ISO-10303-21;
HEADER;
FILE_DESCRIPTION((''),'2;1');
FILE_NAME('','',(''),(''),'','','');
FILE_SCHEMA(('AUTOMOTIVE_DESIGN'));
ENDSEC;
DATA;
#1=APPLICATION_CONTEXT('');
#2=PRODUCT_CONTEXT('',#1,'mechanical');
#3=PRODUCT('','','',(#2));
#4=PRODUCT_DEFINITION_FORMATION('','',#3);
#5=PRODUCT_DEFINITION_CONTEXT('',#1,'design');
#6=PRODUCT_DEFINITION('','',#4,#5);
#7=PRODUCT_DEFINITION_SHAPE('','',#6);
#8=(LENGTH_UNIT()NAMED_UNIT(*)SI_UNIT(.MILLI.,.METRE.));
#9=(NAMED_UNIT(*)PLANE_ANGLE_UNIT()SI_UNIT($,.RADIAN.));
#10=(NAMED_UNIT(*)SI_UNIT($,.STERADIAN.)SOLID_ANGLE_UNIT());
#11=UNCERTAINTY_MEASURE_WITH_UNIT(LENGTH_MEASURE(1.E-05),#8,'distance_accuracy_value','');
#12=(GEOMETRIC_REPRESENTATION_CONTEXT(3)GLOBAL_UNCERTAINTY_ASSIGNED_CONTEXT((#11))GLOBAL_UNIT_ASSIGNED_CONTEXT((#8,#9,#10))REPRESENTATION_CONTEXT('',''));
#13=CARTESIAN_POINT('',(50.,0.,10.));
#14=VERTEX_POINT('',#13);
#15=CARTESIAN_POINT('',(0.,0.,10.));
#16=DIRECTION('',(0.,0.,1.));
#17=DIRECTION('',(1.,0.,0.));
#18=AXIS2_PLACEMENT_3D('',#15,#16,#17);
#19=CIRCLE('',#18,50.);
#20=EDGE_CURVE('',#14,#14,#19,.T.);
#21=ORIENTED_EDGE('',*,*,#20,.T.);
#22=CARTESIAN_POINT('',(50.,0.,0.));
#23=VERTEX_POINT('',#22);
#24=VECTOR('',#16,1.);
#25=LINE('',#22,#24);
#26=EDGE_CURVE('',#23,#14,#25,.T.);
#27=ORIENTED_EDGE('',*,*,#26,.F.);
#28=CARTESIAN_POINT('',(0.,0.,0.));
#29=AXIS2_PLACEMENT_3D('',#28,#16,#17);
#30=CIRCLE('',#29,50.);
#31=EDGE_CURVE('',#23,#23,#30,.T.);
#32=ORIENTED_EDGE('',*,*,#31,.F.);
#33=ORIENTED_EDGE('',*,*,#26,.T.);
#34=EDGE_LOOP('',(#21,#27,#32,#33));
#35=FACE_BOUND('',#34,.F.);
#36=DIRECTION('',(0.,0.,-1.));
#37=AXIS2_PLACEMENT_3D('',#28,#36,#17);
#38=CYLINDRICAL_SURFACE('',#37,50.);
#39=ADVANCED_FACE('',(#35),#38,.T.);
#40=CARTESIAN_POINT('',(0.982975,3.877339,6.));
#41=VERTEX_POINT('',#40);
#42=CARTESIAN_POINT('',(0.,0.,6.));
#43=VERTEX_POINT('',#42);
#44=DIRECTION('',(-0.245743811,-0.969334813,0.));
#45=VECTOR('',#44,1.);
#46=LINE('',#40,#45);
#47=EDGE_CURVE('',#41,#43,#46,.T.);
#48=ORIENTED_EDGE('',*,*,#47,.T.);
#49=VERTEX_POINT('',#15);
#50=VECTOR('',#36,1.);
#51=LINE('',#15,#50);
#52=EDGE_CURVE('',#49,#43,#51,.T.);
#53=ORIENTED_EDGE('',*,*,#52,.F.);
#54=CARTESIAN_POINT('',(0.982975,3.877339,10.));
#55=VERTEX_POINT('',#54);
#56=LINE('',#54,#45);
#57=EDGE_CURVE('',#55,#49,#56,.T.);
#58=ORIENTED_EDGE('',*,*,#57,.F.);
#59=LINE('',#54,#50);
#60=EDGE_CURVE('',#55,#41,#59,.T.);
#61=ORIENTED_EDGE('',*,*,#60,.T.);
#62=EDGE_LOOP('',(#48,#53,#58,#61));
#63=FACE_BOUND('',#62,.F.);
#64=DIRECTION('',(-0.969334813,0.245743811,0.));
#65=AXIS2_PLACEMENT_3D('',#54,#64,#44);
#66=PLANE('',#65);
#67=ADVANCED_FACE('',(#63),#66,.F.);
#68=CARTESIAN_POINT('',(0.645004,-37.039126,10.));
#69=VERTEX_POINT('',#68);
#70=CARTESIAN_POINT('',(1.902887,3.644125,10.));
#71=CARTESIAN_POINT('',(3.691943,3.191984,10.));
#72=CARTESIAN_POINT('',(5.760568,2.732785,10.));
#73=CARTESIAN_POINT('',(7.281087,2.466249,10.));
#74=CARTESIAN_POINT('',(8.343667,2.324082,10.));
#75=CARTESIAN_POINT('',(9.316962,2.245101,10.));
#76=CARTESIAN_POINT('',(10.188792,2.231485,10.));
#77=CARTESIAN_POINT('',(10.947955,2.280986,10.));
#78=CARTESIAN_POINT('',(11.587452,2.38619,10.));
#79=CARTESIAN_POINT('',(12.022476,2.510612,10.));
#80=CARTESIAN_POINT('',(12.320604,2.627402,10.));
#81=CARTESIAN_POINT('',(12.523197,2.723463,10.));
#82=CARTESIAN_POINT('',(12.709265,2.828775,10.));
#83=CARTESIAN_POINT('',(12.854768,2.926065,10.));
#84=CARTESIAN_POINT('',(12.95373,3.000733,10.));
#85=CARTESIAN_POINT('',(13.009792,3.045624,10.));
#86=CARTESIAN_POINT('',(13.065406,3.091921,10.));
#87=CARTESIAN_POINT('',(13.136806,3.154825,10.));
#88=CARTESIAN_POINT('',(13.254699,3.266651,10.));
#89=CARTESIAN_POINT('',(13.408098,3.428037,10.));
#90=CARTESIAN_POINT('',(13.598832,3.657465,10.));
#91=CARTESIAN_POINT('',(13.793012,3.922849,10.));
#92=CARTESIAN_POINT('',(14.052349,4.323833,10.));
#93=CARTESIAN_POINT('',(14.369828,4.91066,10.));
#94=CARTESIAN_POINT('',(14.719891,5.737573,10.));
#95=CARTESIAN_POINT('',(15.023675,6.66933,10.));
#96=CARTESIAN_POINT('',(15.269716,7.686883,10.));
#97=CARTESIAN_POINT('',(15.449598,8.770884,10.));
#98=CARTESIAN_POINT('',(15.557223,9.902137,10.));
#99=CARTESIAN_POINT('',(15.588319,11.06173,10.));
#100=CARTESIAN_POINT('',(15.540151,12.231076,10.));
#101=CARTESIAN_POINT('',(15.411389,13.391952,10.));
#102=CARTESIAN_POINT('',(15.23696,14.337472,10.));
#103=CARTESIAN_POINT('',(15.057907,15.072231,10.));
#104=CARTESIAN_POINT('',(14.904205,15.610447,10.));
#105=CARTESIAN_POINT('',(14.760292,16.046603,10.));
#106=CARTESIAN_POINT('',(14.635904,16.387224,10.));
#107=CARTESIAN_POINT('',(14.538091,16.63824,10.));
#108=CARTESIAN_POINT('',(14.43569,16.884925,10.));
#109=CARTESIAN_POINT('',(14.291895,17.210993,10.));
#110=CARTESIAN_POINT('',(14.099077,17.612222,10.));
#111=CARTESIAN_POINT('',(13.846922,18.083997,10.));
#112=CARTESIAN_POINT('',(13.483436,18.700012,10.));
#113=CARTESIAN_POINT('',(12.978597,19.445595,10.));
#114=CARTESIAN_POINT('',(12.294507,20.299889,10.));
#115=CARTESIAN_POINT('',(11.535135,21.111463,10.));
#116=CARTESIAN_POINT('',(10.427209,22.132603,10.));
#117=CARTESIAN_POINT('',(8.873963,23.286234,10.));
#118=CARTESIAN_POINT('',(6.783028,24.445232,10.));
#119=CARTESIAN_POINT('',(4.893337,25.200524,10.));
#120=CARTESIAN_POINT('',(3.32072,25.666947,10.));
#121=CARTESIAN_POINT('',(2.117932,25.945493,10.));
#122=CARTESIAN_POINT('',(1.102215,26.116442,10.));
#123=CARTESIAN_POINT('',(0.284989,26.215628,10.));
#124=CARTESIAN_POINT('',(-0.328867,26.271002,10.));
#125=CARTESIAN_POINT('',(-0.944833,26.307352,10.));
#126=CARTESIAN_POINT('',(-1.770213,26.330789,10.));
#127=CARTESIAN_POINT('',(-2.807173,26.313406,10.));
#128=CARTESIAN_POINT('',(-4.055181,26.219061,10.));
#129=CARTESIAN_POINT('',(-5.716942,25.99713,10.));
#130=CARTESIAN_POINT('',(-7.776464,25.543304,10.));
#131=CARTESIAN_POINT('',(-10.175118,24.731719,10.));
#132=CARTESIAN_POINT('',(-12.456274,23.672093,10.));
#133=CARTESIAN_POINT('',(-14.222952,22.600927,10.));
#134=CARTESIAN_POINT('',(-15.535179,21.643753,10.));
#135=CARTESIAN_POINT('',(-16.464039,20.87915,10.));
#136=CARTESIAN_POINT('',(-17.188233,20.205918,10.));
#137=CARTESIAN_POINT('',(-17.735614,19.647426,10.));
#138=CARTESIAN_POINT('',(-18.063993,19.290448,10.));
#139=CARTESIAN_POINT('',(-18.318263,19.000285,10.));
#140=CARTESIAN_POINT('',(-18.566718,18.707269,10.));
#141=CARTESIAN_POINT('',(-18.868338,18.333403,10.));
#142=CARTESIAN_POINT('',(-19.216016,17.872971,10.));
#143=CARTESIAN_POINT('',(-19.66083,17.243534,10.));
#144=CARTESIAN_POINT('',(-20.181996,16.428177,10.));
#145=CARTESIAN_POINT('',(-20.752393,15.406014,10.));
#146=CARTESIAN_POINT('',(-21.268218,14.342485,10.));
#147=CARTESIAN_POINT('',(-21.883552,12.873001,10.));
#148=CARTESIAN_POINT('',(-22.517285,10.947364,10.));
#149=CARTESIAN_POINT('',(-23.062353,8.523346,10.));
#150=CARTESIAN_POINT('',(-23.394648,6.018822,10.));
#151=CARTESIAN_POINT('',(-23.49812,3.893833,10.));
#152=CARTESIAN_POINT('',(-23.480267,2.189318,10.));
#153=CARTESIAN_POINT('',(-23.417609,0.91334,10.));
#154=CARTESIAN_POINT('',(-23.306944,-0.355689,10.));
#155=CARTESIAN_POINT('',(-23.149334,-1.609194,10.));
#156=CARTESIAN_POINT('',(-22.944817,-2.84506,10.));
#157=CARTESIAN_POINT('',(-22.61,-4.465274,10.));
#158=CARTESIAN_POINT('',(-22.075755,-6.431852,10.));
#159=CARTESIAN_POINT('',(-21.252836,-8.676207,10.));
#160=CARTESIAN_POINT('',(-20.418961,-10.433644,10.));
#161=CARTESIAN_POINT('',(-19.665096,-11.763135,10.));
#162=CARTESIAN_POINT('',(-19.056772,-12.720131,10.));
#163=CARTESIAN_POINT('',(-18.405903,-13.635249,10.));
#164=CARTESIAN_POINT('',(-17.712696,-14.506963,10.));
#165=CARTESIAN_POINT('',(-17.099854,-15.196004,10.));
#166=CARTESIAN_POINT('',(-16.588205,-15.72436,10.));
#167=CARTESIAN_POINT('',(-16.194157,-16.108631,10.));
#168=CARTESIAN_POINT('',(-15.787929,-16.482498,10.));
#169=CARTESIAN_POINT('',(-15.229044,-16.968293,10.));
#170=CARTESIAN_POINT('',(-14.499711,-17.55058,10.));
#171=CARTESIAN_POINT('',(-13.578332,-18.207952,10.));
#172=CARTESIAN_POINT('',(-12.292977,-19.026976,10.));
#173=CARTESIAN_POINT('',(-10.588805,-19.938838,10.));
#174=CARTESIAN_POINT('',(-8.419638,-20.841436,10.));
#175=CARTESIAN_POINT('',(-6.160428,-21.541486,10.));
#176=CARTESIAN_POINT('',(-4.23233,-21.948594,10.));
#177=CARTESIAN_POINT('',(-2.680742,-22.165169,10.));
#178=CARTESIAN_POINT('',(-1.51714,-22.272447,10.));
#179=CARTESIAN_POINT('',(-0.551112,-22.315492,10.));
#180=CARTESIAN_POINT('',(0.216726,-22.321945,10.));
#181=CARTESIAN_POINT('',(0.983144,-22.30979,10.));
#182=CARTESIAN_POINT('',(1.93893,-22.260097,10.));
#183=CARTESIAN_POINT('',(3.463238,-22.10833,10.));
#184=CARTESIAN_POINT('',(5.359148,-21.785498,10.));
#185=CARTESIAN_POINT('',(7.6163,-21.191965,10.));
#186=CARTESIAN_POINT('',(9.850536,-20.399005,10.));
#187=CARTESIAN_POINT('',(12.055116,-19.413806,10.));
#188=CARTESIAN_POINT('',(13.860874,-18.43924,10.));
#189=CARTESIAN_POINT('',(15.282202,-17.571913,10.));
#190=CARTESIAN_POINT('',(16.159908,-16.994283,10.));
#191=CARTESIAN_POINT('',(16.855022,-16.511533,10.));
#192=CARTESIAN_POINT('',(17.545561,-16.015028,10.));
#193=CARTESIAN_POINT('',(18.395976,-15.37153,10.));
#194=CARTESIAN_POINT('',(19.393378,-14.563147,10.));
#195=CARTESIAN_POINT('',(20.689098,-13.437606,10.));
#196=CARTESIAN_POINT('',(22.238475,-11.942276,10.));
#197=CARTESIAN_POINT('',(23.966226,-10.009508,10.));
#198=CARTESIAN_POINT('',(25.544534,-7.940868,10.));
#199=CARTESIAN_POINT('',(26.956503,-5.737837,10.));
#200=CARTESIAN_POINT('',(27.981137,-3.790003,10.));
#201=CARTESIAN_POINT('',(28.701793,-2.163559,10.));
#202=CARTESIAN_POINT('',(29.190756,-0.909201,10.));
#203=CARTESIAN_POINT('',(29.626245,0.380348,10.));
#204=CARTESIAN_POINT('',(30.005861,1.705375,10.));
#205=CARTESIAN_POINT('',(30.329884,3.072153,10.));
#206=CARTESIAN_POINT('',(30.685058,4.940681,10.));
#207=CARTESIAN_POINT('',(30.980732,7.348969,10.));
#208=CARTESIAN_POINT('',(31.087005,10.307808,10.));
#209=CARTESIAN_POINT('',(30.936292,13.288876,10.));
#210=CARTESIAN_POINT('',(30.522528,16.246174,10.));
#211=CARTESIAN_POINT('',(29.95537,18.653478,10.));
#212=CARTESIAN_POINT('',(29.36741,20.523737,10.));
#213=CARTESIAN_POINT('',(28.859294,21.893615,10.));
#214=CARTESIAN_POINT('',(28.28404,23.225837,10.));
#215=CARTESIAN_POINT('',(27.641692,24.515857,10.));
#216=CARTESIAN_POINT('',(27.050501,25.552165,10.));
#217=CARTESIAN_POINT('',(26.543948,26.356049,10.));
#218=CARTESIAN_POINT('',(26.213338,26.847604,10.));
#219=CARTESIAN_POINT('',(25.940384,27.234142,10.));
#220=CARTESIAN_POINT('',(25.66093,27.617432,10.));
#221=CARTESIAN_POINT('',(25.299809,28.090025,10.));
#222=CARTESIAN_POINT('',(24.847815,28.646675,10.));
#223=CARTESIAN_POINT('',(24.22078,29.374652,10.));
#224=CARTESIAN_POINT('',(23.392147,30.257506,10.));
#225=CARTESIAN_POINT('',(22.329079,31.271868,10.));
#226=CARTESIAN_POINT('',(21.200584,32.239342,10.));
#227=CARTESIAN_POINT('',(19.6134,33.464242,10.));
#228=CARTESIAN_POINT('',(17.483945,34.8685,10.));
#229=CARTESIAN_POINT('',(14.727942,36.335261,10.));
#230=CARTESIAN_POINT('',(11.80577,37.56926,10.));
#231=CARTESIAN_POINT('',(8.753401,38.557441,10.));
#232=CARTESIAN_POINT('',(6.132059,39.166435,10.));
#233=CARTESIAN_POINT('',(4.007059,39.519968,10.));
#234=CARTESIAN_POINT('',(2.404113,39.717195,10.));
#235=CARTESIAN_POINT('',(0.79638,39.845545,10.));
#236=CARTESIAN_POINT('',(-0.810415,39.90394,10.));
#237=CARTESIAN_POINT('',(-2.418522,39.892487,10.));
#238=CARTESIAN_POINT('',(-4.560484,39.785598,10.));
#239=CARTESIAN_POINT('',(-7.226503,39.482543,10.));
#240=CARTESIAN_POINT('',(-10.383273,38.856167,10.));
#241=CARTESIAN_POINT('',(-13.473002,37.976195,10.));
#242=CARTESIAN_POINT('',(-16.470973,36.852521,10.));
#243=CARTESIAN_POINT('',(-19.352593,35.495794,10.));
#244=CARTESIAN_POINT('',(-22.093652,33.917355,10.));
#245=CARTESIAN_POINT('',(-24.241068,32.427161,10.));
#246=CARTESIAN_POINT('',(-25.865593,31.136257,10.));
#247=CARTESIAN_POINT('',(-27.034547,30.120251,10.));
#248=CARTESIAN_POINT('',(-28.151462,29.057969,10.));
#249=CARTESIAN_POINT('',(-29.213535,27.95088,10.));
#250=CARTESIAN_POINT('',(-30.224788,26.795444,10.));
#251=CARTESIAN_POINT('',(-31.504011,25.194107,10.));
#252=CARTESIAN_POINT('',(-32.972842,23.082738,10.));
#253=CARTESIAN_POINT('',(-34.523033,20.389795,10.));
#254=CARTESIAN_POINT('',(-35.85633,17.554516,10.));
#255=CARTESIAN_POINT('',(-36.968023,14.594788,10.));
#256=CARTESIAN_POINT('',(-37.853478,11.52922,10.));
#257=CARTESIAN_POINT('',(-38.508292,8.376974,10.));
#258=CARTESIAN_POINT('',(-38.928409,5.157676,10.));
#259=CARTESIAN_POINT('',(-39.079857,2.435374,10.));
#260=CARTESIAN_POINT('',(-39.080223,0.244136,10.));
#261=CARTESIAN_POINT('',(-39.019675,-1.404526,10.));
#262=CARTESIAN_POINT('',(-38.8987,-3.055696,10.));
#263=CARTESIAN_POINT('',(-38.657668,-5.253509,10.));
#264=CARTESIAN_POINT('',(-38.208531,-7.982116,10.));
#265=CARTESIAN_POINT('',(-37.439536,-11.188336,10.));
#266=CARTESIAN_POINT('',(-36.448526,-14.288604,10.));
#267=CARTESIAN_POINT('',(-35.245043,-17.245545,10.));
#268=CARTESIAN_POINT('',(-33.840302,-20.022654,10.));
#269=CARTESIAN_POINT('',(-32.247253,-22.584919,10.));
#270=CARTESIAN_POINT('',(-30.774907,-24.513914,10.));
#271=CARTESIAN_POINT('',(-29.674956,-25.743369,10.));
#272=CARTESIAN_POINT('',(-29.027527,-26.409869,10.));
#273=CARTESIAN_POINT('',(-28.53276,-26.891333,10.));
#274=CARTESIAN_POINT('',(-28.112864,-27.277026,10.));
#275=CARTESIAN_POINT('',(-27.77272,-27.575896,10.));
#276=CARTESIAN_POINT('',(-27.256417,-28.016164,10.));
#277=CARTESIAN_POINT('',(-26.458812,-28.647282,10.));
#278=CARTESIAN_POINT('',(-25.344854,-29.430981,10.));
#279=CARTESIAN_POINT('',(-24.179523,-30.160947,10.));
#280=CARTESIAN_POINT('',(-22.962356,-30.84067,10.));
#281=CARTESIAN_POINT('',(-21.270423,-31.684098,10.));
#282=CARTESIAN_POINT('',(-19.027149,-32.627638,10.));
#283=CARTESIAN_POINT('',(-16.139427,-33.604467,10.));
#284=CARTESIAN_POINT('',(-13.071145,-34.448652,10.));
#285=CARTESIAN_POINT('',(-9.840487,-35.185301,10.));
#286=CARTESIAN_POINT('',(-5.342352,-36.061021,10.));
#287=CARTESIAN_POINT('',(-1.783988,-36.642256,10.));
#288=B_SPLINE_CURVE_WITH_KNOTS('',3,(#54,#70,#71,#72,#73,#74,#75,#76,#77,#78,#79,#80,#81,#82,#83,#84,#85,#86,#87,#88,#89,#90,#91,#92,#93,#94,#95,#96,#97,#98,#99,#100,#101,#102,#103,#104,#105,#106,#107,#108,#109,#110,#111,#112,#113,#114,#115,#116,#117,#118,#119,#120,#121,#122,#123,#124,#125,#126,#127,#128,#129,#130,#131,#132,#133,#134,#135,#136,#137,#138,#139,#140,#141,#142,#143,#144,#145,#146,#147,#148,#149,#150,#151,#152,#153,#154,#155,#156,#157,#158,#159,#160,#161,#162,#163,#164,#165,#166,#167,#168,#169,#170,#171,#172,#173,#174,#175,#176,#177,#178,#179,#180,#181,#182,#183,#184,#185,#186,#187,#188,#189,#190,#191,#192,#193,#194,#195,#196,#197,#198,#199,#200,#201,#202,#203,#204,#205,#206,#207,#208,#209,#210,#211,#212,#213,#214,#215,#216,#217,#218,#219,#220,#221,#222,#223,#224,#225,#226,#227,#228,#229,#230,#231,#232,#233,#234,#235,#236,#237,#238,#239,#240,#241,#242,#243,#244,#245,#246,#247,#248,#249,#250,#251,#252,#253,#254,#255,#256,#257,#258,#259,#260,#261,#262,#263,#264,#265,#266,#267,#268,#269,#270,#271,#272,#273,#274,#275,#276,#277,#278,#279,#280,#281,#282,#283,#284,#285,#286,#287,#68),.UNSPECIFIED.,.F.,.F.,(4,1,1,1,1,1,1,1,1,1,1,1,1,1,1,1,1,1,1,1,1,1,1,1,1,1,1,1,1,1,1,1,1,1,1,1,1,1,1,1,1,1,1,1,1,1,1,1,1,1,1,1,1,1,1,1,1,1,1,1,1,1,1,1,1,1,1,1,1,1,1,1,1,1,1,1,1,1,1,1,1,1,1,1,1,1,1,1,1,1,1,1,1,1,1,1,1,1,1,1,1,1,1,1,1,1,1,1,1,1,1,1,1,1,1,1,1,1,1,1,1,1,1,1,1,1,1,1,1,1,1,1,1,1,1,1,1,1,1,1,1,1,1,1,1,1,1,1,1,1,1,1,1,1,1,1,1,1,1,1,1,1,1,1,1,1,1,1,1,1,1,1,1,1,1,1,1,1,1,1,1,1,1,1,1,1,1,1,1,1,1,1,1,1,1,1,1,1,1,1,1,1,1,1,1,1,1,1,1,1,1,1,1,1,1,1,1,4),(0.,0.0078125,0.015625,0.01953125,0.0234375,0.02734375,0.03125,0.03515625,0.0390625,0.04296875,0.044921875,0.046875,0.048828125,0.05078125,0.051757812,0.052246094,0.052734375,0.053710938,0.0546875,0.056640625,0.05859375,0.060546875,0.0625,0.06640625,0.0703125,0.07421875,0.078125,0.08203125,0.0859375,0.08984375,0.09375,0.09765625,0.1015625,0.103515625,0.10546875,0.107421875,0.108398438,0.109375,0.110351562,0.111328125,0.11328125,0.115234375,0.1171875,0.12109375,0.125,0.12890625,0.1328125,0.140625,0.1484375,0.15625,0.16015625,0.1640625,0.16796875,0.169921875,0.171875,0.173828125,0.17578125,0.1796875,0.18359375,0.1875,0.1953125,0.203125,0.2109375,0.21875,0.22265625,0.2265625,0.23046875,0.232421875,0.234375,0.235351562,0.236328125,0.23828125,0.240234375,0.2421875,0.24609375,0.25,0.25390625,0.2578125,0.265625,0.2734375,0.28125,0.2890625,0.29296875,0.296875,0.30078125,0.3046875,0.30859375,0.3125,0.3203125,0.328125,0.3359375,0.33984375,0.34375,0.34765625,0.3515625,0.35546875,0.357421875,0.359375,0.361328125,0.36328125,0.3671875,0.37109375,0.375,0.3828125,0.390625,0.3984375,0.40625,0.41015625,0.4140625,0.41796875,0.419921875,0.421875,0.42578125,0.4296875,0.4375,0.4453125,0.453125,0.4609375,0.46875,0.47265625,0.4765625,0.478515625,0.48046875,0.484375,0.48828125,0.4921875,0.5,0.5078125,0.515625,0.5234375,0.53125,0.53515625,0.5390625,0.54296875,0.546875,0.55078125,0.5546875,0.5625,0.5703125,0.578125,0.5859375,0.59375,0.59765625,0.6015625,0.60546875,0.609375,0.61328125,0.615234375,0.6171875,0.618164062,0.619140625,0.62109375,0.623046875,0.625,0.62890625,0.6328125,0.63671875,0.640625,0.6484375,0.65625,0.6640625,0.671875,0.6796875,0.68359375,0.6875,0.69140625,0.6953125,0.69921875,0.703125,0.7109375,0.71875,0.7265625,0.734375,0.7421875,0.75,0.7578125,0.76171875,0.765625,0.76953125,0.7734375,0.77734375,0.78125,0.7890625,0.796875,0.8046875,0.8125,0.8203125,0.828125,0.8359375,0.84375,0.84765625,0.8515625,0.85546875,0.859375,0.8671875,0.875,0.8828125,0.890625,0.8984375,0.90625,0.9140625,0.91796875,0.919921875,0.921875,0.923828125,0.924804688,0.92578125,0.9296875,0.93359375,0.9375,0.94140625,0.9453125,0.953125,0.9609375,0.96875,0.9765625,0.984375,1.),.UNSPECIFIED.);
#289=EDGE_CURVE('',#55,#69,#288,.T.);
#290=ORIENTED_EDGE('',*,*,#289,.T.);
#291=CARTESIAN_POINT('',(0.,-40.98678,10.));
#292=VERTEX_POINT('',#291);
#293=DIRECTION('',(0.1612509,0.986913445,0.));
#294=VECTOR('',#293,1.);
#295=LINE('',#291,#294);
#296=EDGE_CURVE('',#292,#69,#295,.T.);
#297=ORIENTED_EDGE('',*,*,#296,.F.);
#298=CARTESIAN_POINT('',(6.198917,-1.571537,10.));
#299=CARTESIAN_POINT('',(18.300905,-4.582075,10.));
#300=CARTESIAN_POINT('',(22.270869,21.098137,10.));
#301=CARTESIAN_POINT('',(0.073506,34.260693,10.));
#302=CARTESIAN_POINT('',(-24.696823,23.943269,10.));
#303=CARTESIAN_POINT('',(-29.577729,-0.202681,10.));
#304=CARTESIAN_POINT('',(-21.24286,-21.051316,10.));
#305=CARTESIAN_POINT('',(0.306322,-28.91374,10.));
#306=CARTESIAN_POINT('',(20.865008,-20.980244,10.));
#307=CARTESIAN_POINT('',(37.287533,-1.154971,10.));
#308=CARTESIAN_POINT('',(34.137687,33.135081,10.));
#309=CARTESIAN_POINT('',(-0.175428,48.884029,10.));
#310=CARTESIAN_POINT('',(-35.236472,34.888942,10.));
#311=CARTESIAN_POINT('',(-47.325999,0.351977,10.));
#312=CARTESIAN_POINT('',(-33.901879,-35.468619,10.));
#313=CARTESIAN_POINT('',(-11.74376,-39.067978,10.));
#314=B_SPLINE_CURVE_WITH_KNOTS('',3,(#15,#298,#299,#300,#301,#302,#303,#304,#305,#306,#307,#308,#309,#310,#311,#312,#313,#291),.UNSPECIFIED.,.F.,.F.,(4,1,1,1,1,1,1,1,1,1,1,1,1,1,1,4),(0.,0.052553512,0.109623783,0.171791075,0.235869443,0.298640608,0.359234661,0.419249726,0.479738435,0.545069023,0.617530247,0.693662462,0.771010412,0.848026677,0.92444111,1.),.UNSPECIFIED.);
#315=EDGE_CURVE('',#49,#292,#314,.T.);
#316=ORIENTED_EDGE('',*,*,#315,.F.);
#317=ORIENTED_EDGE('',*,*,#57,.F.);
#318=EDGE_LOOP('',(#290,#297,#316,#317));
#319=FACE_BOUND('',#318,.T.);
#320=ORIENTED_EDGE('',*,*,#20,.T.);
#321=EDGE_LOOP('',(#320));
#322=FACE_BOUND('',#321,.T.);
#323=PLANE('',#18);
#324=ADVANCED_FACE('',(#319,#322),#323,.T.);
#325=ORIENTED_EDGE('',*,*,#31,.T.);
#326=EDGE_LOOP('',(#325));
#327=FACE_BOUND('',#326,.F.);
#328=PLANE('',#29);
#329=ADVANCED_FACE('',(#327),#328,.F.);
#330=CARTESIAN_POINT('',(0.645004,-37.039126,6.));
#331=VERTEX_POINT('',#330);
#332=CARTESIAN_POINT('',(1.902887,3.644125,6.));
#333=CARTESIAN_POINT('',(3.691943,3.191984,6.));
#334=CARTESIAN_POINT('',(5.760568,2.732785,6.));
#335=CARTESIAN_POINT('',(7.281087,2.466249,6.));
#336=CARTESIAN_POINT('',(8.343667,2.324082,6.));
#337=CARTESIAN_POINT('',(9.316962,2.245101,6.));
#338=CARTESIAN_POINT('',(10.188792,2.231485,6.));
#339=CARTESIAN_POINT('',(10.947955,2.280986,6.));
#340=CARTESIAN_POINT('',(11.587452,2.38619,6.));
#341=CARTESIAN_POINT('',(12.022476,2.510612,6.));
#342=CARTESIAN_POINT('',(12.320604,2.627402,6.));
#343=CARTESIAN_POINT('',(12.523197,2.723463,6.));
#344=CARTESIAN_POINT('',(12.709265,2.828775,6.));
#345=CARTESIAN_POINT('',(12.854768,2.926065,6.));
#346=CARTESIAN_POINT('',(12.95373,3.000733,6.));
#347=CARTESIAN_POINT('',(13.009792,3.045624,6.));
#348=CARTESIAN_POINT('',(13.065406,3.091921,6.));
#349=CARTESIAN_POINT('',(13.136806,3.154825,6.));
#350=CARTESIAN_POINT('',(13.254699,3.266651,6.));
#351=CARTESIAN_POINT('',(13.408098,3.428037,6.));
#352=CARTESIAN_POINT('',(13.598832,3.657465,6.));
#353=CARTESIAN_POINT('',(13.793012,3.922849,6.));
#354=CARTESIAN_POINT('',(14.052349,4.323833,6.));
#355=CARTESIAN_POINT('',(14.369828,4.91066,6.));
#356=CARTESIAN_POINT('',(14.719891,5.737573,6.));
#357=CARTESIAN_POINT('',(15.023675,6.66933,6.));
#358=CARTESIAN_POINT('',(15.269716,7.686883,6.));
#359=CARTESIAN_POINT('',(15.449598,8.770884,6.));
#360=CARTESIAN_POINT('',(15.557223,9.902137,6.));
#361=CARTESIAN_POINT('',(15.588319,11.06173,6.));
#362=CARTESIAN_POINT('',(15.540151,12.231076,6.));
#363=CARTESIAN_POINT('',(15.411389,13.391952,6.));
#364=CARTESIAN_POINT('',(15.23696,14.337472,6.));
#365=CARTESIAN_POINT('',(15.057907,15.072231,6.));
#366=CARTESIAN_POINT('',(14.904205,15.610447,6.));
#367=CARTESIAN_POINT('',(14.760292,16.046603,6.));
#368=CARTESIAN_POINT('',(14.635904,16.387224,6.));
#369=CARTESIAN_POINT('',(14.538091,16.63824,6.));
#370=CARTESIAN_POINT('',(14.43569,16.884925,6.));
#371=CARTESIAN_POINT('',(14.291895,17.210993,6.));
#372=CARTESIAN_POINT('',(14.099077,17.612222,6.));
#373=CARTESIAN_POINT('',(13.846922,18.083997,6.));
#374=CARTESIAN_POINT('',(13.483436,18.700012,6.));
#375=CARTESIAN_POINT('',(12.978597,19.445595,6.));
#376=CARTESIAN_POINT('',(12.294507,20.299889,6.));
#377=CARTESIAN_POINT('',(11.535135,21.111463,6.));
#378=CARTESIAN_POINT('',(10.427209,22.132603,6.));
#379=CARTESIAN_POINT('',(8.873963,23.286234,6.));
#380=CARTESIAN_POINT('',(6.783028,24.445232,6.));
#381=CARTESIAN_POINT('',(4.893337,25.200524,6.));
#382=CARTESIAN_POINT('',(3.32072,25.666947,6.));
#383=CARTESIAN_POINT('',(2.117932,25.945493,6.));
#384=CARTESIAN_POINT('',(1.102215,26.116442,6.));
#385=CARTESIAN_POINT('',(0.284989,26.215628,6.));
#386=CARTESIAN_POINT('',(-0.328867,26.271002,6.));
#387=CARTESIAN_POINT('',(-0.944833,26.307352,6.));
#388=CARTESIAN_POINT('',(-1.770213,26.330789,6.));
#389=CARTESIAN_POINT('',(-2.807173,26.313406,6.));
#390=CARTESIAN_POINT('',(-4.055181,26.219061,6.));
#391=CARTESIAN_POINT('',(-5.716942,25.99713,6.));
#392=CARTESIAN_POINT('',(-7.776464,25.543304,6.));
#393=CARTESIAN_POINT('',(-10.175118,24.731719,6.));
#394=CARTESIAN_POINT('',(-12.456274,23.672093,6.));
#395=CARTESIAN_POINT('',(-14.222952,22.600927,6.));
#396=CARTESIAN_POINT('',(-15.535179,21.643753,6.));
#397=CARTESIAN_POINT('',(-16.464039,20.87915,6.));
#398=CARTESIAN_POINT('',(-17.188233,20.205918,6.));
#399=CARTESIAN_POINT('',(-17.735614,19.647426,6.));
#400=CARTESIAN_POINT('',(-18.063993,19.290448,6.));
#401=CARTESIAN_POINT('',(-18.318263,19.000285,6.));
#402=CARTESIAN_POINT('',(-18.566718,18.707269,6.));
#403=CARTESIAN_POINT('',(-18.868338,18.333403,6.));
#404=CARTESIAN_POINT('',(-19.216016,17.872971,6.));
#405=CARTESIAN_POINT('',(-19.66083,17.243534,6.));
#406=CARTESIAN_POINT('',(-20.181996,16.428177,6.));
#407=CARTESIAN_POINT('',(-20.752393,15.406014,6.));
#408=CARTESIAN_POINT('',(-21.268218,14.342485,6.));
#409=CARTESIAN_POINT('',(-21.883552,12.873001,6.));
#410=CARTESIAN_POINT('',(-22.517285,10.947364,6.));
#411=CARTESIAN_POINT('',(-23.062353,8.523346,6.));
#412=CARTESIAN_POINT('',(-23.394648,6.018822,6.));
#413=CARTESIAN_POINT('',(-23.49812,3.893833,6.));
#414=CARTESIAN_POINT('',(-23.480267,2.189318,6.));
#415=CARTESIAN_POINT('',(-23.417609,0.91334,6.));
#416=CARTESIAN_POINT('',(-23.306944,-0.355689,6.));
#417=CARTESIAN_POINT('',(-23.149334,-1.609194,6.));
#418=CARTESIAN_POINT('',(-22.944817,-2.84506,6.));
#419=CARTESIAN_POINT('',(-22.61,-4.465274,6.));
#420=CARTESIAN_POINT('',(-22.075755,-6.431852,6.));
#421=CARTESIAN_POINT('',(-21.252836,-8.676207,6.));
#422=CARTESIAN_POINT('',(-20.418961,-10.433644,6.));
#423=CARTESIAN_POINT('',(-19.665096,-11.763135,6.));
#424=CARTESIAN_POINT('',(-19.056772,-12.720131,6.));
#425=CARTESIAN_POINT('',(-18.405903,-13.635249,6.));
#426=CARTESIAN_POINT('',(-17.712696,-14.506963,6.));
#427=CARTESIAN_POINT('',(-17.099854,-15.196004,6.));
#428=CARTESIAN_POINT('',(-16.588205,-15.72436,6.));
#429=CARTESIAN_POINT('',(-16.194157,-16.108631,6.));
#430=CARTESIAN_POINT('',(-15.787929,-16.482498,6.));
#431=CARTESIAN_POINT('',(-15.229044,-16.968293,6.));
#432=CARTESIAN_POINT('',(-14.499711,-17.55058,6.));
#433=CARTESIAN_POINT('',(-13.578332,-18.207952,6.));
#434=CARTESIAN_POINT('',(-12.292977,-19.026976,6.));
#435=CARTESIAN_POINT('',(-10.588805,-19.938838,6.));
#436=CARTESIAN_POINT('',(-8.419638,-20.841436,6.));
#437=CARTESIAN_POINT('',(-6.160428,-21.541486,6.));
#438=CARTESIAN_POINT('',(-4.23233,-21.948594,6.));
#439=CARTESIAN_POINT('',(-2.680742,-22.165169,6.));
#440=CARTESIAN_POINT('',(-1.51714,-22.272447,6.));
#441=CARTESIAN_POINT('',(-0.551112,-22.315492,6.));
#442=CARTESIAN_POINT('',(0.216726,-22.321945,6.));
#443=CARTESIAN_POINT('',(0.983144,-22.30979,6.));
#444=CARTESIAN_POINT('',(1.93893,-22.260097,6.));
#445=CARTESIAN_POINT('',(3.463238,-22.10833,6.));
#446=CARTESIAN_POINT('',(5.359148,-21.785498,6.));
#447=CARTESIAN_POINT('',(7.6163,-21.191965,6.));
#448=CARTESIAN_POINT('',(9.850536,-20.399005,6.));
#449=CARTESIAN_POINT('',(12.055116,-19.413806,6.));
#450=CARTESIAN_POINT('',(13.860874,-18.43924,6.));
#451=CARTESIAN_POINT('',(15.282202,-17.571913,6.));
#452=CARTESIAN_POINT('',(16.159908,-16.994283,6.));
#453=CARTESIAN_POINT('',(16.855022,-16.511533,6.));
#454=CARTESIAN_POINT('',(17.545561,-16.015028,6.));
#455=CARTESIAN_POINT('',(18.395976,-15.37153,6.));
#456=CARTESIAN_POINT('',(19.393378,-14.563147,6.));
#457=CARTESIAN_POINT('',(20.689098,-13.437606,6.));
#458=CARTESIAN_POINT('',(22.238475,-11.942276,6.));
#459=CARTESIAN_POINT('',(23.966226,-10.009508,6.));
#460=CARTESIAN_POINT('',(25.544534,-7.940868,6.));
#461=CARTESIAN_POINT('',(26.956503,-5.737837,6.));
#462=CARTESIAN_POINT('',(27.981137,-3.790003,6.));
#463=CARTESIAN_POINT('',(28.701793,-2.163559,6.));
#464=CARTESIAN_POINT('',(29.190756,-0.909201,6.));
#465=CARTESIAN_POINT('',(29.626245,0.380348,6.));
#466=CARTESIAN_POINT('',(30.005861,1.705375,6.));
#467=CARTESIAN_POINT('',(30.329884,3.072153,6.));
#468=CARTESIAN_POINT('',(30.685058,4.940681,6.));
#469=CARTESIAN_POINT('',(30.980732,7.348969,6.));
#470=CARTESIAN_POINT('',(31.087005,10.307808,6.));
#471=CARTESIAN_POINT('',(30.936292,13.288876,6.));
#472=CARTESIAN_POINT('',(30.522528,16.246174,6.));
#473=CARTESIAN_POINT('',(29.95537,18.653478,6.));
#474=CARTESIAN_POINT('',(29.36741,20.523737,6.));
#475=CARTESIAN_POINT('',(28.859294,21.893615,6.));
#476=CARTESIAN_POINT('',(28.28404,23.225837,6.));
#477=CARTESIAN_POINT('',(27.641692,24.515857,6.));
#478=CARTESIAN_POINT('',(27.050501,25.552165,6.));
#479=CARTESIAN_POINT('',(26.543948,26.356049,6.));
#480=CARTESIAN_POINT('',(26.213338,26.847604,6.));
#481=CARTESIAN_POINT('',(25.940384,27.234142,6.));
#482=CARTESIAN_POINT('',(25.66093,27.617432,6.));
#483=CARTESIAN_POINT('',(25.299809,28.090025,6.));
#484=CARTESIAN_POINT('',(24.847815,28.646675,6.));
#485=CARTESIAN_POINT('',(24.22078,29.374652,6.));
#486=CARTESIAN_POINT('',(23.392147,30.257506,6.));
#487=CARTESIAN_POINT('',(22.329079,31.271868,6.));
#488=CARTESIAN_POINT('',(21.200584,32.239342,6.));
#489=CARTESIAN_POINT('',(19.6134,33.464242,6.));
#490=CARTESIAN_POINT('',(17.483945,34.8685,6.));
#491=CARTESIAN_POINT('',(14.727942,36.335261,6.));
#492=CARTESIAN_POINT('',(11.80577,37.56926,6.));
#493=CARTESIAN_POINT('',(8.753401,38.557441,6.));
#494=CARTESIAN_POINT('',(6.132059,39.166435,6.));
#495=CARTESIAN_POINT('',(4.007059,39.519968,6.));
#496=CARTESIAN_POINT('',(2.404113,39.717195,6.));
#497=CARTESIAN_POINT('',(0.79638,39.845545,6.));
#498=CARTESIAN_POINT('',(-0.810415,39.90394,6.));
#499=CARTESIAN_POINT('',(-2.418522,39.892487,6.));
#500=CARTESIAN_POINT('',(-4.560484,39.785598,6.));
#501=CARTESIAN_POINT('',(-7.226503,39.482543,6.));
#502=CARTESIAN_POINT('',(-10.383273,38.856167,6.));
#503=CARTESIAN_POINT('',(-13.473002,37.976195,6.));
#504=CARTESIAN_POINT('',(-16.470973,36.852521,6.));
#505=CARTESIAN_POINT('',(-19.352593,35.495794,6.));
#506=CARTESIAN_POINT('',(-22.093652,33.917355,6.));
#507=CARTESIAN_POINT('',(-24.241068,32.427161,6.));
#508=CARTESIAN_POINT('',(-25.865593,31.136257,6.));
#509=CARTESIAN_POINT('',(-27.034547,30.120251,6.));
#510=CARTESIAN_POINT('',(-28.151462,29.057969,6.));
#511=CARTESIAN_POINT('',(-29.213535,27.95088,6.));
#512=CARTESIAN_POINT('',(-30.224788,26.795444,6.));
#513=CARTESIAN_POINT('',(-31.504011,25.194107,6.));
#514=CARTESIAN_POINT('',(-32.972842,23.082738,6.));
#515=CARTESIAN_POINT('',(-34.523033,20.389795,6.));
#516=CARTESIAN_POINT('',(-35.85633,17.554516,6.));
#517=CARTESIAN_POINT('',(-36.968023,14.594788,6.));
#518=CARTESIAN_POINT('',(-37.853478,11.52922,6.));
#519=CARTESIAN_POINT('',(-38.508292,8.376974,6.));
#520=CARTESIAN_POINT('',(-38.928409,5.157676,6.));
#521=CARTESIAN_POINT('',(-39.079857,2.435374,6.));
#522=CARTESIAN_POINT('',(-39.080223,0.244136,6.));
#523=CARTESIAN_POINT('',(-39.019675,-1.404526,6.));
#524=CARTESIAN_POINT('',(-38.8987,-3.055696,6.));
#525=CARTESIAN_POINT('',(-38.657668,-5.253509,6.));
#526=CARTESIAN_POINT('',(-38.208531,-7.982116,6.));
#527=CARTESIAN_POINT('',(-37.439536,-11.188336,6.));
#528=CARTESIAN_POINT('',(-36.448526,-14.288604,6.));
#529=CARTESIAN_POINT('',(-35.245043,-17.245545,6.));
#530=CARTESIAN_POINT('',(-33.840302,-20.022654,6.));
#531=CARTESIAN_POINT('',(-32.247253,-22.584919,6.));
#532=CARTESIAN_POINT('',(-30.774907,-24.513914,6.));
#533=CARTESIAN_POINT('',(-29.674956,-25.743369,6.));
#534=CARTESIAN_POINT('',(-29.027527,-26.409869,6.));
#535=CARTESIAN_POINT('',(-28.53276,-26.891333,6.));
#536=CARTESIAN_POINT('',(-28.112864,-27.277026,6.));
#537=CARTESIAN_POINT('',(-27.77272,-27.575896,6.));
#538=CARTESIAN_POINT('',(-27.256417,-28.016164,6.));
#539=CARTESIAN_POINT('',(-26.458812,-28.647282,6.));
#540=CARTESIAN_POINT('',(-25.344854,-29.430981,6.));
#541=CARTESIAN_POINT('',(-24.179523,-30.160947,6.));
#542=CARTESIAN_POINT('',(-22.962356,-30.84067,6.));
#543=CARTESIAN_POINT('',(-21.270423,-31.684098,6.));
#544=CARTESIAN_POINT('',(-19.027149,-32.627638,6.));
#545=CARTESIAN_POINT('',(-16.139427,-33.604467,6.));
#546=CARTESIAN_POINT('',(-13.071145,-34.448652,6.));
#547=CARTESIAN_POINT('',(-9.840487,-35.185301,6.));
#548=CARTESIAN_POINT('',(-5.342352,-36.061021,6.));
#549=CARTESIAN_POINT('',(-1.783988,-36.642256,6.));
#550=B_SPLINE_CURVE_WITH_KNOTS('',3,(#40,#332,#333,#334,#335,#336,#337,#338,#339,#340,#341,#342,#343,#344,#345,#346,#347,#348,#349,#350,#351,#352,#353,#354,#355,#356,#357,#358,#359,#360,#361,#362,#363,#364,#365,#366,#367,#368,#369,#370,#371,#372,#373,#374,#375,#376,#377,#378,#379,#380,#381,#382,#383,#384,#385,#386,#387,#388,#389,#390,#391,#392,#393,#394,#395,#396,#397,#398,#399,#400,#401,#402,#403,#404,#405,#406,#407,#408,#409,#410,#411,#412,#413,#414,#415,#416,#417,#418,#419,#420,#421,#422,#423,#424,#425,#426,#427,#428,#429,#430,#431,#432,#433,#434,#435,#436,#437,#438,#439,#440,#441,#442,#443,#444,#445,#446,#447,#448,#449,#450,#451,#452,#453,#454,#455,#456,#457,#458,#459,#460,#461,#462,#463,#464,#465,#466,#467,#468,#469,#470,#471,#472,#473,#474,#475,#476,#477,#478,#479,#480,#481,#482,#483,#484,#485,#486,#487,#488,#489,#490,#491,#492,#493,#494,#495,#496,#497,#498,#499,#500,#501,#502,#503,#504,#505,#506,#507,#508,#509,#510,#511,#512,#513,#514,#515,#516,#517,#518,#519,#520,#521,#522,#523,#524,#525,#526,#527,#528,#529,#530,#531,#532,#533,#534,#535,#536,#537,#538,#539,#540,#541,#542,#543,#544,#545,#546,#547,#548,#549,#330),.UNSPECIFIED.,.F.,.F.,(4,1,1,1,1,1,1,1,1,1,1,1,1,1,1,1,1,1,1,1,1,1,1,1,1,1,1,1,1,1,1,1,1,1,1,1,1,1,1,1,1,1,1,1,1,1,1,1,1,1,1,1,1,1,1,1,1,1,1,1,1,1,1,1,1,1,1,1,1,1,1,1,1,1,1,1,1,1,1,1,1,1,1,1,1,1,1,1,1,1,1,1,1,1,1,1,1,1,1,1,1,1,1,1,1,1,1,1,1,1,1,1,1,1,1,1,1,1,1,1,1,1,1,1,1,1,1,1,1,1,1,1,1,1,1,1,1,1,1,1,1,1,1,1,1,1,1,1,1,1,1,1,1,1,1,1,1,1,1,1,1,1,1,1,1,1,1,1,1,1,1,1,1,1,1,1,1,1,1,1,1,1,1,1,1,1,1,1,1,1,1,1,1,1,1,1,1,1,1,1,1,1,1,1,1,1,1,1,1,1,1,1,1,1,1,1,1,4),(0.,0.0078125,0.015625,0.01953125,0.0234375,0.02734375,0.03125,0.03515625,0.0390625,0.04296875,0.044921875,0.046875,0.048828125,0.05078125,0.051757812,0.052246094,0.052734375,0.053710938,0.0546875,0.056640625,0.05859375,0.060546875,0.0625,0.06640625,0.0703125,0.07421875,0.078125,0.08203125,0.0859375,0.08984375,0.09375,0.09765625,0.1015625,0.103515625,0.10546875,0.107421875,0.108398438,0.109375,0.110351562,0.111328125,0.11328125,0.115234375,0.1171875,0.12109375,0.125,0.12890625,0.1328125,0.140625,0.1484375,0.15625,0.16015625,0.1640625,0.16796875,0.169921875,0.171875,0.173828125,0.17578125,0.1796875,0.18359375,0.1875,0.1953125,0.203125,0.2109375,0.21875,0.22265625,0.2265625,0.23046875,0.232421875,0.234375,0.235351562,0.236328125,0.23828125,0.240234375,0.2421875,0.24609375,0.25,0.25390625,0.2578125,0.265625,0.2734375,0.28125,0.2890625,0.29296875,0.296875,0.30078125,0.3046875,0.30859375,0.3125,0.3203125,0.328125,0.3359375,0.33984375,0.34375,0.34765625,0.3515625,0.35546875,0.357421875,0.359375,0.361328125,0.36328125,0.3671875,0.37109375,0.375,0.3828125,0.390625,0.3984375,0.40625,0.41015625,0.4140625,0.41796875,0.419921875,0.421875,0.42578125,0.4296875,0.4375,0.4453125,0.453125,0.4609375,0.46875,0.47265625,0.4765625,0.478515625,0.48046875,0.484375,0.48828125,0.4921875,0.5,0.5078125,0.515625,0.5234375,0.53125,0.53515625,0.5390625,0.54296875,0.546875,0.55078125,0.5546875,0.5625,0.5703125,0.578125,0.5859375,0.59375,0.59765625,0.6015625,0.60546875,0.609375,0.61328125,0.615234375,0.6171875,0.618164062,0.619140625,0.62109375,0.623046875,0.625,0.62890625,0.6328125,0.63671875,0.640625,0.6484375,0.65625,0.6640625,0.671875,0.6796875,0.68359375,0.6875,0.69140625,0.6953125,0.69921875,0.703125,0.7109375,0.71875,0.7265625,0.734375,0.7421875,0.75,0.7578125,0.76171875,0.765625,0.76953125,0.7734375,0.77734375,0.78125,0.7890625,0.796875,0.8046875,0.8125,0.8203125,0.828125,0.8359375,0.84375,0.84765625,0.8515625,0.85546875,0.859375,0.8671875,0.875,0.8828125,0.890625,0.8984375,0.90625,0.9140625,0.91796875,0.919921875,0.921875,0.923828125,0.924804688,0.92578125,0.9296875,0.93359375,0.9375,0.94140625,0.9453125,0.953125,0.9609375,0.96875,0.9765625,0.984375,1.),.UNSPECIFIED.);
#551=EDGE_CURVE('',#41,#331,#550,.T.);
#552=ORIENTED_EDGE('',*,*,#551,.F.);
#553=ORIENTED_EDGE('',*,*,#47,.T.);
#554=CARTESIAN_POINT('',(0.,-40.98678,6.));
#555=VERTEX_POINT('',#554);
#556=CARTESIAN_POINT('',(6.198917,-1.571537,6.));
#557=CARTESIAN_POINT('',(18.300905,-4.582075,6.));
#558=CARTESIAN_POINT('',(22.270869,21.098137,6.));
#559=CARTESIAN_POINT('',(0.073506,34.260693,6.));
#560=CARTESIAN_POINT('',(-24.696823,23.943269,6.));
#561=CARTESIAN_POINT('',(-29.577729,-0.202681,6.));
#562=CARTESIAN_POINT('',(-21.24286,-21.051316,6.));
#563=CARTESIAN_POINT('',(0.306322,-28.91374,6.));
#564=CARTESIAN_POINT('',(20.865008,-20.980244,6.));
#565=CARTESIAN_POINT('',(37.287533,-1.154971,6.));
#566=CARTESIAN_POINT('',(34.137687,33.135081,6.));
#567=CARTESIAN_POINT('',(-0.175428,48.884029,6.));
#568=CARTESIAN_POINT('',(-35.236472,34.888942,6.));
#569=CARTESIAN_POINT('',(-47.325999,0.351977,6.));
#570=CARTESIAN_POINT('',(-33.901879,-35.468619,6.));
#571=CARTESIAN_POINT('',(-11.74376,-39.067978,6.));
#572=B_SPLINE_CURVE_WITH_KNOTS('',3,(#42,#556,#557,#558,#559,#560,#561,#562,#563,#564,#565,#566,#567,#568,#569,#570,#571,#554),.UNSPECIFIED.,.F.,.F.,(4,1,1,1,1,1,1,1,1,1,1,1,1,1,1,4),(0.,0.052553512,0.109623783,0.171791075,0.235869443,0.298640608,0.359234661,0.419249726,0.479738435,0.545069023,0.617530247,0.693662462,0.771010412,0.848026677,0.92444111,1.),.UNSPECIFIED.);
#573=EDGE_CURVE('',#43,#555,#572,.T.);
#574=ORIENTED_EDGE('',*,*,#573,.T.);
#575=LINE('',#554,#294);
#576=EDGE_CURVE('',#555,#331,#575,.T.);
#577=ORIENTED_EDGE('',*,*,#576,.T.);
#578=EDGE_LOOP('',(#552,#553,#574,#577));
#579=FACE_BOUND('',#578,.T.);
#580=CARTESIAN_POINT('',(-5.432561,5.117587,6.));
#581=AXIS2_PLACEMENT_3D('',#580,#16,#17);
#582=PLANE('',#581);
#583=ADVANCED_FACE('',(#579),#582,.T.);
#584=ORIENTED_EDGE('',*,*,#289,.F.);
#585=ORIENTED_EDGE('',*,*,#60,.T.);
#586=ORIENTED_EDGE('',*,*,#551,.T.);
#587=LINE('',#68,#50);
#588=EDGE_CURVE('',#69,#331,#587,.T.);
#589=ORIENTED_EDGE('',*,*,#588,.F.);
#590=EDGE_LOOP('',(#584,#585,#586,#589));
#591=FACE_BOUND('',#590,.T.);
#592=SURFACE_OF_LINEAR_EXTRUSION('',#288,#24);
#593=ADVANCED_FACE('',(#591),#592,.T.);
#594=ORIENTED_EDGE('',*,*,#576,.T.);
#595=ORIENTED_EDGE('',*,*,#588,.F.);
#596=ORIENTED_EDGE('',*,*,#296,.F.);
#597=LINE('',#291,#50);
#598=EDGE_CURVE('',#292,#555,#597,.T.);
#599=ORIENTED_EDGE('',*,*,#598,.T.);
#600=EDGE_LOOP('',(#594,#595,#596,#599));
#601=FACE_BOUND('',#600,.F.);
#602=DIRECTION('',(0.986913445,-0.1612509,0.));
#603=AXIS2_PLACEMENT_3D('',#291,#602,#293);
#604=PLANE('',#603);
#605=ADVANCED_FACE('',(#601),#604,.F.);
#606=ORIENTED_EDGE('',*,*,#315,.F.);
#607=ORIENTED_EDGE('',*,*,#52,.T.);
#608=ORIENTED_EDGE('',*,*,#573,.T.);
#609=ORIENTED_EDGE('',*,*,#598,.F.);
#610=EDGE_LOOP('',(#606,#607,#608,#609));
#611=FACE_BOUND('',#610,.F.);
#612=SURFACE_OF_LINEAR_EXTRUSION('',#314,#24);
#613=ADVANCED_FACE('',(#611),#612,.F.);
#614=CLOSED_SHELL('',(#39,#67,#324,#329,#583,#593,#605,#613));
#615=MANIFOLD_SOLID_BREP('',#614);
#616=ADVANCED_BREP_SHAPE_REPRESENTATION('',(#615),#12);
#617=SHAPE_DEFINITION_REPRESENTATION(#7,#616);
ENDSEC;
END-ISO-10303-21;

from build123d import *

# Parameters (mm, degrees)
F0_R     = 50
F1_DEPTH = 10
F3_DEPTH = 4


# Not quite as in the source:
# - the dataset's text gives a spline's control points without its knots; the knots are read off the source's solid


with BuildPart() as f1:
    # F0 (on Top) → F1 (new body)
    with BuildSketch(Plane.XY):
        Circle(F0_R)
    extrude(amount=F1_DEPTH)

    # F2 (on face) → F3 (cut)
    with BuildSketch(Plane.XY.offset(10)):
        with BuildLine():
            Line((0.9829752457, 3.8773392509), (0, 0))
            add(Edge.make_bspline(
                [(0, 0), (6.1989170972, -1.5715369903), (18.3009054469, -4.5820748684), (22.2708690558, 21.098136745), (0.0735061662, 34.2606933049), (-24.696823294, 23.9432686999), (-29.5777293656, -0.2026812836), (-21.242860416, -21.0513155032), (0.3063219845, -28.9137402116), (20.8650084968, -20.9802440135), (37.2875332391, -1.1549707016), (34.1376870072, 33.13508074), (-0.1754280995, 48.8840289104), (-35.2364717279, 34.8889421314), (-47.3259993463, 0.3519769186), (-33.9018786494, -35.4686194222), (-11.7437604148, -39.0679776254), (0, -40.9867800772)],
                knots=[0, 0, 0, 0, 0.0525535116, 0.1096237828, 0.1717910753, 0.2358694433, 0.2986406084, 0.3592346609, 0.4192497264, 0.4797384354, 0.5450690227, 0.6175302469, 0.6936624619, 0.7710104122, 0.8480266768, 0.9244411097, 1, 1, 1, 1], degree=3))
            Line((0, -40.9867800772), (0.6450036004, -37.0391262986))
            add(Edge.make_bspline(
                [(0.9829752457, 3.8773392509), (1.9028873637, 3.6441249816), (3.6919433345, 3.1919843928), (5.7605675211, 2.732785135), (7.2810865736, 2.4662486899), (8.3436670607, 2.3240819174), (9.3169618233, 2.2451010951), (10.1887915864, 2.2314853541), (10.947954819, 2.2809860032), (11.5874524899, 2.3861900884), (12.0224756906, 2.5106115901), (12.3206036207, 2.6274021611), (12.5231974111, 2.7234627921), (12.709265499, 2.8287745147), (12.8547684896, 2.9260651259), (12.9537303385, 3.0007327444), (13.0097922913, 3.045623949), (13.065405617, 3.0919209765), (13.1368063649, 3.1548250553), (13.2546992489, 3.2666505482), (13.4080975553, 3.4280372783), (13.5988320235, 3.6574645444), (13.793011554, 3.9228491254), (14.0523488215, 4.3238331909), (14.3698276971, 4.9106602674), (14.7198907044, 5.7375729872), (15.0236752247, 6.6693304102), (15.2697160876, 7.686882739), (15.4495979877, 8.7708840237), (15.5572225131, 9.902137312), (15.5883189477, 11.0617303408), (15.5401508393, 12.231076471), (15.4113885134, 13.3919517708), (15.2369603106, 14.3374724452), (15.0579074215, 15.0722309945), (14.9042054761, 15.6104471009), (14.760291964, 16.0466031193), (14.6359044176, 16.3872240146), (14.5380910297, 16.6382401352), (14.4356903614, 16.8849254649), (14.2918948991, 17.210992659), (14.0990774833, 17.6122224287), (13.8469224085, 18.0839965323), (13.4834359088, 18.7000121361), (12.9785967796, 19.4455949123), (12.2945069159, 20.2998886289), (11.5351348638, 21.1114625837), (10.4272090237, 22.132602539), (8.873962516, 23.2862338072), (6.78302844, 24.4452320191), (4.8933370416, 25.200524048), (3.3207203095, 25.6669467244), (2.1179315126, 25.9454931128), (1.1022148065, 26.1164417869), (0.2849894908, 26.215627576), (-0.3288668952, 26.2710020117), (-0.944832867, 26.3073524442), (-1.7702133334, 26.3307890904), (-2.8071733381, 26.313405725), (-4.0551806217, 26.21906102), (-5.7169415053, 25.9971300145), (-7.776464249, 25.5433043019), (-10.175118105, 24.7317187281), (-12.4562742148, 23.6720925147), (-14.2229522716, 22.6009268113), (-15.5351787337, 21.6437533778), (-16.4640394874, 20.8791496162), (-17.1882331249, 20.2059180499), (-17.7356138092, 19.6474264532), (-18.0639925936, 19.2904481563), (-18.3182625473, 19.0002846122), (-18.5667183142, 18.7072694742), (-18.8683379851, 18.3334029952), (-19.2160160161, 17.8729710371), (-19.6608298312, 17.2435341442), (-20.1819960766, 16.4281771031), (-20.7523934885, 15.4060137367), (-21.268217967, 14.3424853647), (-21.8835524824, 12.87300129), (-22.5172852058, 10.947363596), (-23.0623530621, 8.5233456031), (-23.3946478659, 6.0188215741), (-23.4981201142, 3.8938329372), (-23.4802667425, 2.1893181877), (-23.4176091372, 0.9133395254), (-23.3069435996, -0.3556891252), (-23.1493340787, -1.6091936827), (-22.9448171574, -2.8450597271), (-22.6100002441, -4.4652743304), (-22.0757554184, -6.4318515305), (-21.25283637, -8.6762072748), (-20.4189605639, -10.4336444958), (-19.6650960756, -11.7631346357), (-19.0567723277, -12.720130822), (-18.4059032739, -13.6352485857), (-17.7126959927, -14.5069630382), (-17.0998540199, -15.1960044902), (-16.5882045354, -15.7243596211), (-16.1941571325, -16.1086306674), (-15.7879294574, -16.4824981344), (-15.2290443776, -16.9682925043), (-14.4997105828, -17.5505796161), (-13.5783323537, -18.2079519881), (-12.2929772431, -19.0269758129), (-10.5888047789, -19.938837613), (-8.4196382692, -20.8414361792), (-6.1604276162, -21.5414857343), (-4.2323299068, -21.9485938568), (-2.6807417172, -22.1651690422), (-1.5171397493, -22.2724472773), (-0.5511123318, -22.3154922103), (0.2167258913, -22.3219449036), (0.9831444969, -22.309789572), (1.9389300412, -22.2600968514), (3.4632384995, -22.1083304633), (5.3591482036, -21.7854976699), (7.6163004907, -21.1919650386), (9.8505364688, -20.3990053996), (12.0551163104, -19.4138057378), (13.8608742765, -18.4392396328), (15.2822022906, -17.5719125708), (16.159908179, -16.9942832498), (16.8550219419, -16.5115327951), (17.5455608481, -16.0150277494), (18.3959762693, -15.3715302931), (19.3933777801, -14.5631467928), (20.6890981922, -13.4376059632), (22.238475441, -11.9422761323), (23.9662259333, -10.0095081517), (25.5445342883, -7.9408680127), (26.956502869, -5.7378373633), (27.9811372935, -3.7900027382), (28.7017933347, -2.1635587764), (29.1907558737, -0.909201038), (29.6262446766, 0.3803481443), (30.0058614184, 1.7053748031), (30.3298836132, 3.0721528042), (30.6850577494, 4.9406805374), (30.9807318974, 7.3489690424), (31.0870049589, 10.3078079807), (30.9362916645, 13.2888755712), (30.5225277046, 16.2461741816), (29.9553697607, 18.6534779374), (29.3674099953, 20.5237371037), (28.859293606, 21.8936146039), (28.2840401957, 23.2258374812), (27.6416920127, 24.5158570639), (27.0505011679, 25.5521651048), (26.5439476352, 26.3560493273), (26.2133379148, 26.8476041708), (25.9403841004, 27.2341423925), (25.6609301543, 27.6174320909), (25.2998089096, 28.0900254247), (24.8478148423, 28.6466754627), (24.2207795279, 29.3746517677), (23.3921466434, 30.2575058744), (22.3290787981, 31.2718684755), (21.200584435, 32.2393418762), (19.6134002178, 33.4642423036), (17.483944727, 34.8684997774), (14.7279424465, 36.335261054), (11.8057697751, 37.5692599456), (8.7534005683, 38.5574407969), (6.1320587685, 39.1664353827), (4.0070592021, 39.5199677194), (2.4041134062, 39.7171950002), (0.7963798197, 39.845544794), (-0.8104146587, 39.9039396847), (-2.4185221304, 39.8924871177), (-4.5604842374, 39.7855984688), (-7.2265028263, 39.4825428059), (-10.383273289, 38.8561669397), (-13.4730023265, 37.9761953251), (-16.4709730035, 36.8525213366), (-19.3525929616, 35.495793691), (-22.0936516014, 33.9173549474), (-24.2410679288, 32.4271611991), (-25.8655925512, 31.1362572648), (-27.0345467632, 30.1202513865), (-28.1514618479, 29.0579692759), (-29.2135354163, 27.9508796299), (-30.2247884904, 26.7954443816), (-31.5040107866, 25.1941068986), (-32.9728421502, 23.0827380752), (-34.5230333925, 20.3897950674), (-35.8563298141, 17.5545162934), (-36.9680228455, 14.5947878667), (-37.8534777088, 11.5292202804), (-38.50829185, 8.37697423), (-38.9284090709, 5.1576759205), (-39.0798568641, 2.4353735099), (-39.0802229594, 0.2441356766), (-39.019674873, -1.404526295), (-38.8987000057, -3.0556956999), (-38.6576677887, -5.2535089233), (-38.208530677, -7.9821164763), (-37.4395364197, -11.1883361085), (-36.448526432, -14.2886044617), (-35.2450434282, -17.2455446794), (-33.8403020237, -20.0226537749), (-32.2472533044, -22.5849192117), (-30.7749066354, -24.5139138673), (-29.6749561406, -25.7433689609), (-29.0275267795, -26.4098685759), (-28.5327604029, -26.8913330618), (-28.1128643996, -27.2770255237), (-27.7727202041, -27.5758956289), (-27.2564166682, -28.0161642198), (-26.4588116506, -28.6472818821), (-25.3448536883, -29.4309811538), (-24.1795231027, -30.160947193), (-22.962356162, -30.840670048), (-21.2704230555, -31.6840980598), (-19.0271487492, -32.6276377811), (-16.139427244, -33.6044672294), (-13.0711447396, -34.448651841), (-9.8404866183, -35.1853006191), (-5.342352494, -36.061021054), (-1.7839882341, -36.6422555074), (0.6450036004, -37.0391262986)],
                knots=[0, 0, 0, 0, 0.0078125, 0.015625, 0.01953125, 0.0234375, 0.02734375, 0.03125, 0.03515625, 0.0390625, 0.04296875, 0.044921875, 0.046875, 0.048828125, 0.05078125, 0.0517578125, 0.0522460938, 0.052734375, 0.0537109375, 0.0546875, 0.056640625, 0.05859375, 0.060546875, 0.0625, 0.06640625, 0.0703125, 0.07421875, 0.078125, 0.08203125, 0.0859375, 0.08984375, 0.09375, 0.09765625, 0.1015625, 0.103515625, 0.10546875, 0.107421875, 0.1083984375, 0.109375, 0.1103515625, 0.111328125, 0.11328125, 0.115234375, 0.1171875, 0.12109375, 0.125, 0.12890625, 0.1328125, 0.140625, 0.1484375, 0.15625, 0.16015625, 0.1640625, 0.16796875, 0.169921875, 0.171875, 0.173828125, 0.17578125, 0.1796875, 0.18359375, 0.1875, 0.1953125, 0.203125, 0.2109375, 0.21875, 0.22265625, 0.2265625, 0.23046875, 0.232421875, 0.234375, 0.2353515625, 0.236328125, 0.23828125, 0.240234375, 0.2421875, 0.24609375, 0.25, 0.25390625, 0.2578125, 0.265625, 0.2734375, 0.28125, 0.2890625, 0.29296875, 0.296875, 0.30078125, 0.3046875, 0.30859375, 0.3125, 0.3203125, 0.328125, 0.3359375, 0.33984375, 0.34375, 0.34765625, 0.3515625, 0.35546875, 0.357421875, 0.359375, 0.361328125, 0.36328125, 0.3671875, 0.37109375, 0.375, 0.3828125, 0.390625, 0.3984375, 0.40625, 0.41015625, 0.4140625, 0.41796875, 0.419921875, 0.421875, 0.42578125, 0.4296875, 0.4375, 0.4453125, 0.453125, 0.4609375, 0.46875, 0.47265625, 0.4765625, 0.478515625, 0.48046875, 0.484375, 0.48828125, 0.4921875, 0.5, 0.5078125, 0.515625, 0.5234375, 0.53125, 0.53515625, 0.5390625, 0.54296875, 0.546875, 0.55078125, 0.5546875, 0.5625, 0.5703125, 0.578125, 0.5859375, 0.59375, 0.59765625, 0.6015625, 0.60546875, 0.609375, 0.61328125, 0.615234375, 0.6171875, 0.6181640625, 0.619140625, 0.62109375, 0.623046875, 0.625, 0.62890625, 0.6328125, 0.63671875, 0.640625, 0.6484375, 0.65625, 0.6640625, 0.671875, 0.6796875, 0.68359375, 0.6875, 0.69140625, 0.6953125, 0.69921875, 0.703125, 0.7109375, 0.71875, 0.7265625, 0.734375, 0.7421875, 0.75, 0.7578125, 0.76171875, 0.765625, 0.76953125, 0.7734375, 0.77734375, 0.78125, 0.7890625, 0.796875, 0.8046875, 0.8125, 0.8203125, 0.828125, 0.8359375, 0.84375, 0.84765625, 0.8515625, 0.85546875, 0.859375, 0.8671875, 0.875, 0.8828125, 0.890625, 0.8984375, 0.90625, 0.9140625, 0.91796875, 0.919921875, 0.921875, 0.923828125, 0.9248046875, 0.92578125, 0.9296875, 0.93359375, 0.9375, 0.94140625, 0.9453125, 0.953125, 0.9609375, 0.96875, 0.9765625, 0.984375, 1, 1, 1, 1], degree=3))
        make_face()
    extrude(amount=-F3_DEPTH, mode=Mode.SUBTRACT)


solid = f1.part
